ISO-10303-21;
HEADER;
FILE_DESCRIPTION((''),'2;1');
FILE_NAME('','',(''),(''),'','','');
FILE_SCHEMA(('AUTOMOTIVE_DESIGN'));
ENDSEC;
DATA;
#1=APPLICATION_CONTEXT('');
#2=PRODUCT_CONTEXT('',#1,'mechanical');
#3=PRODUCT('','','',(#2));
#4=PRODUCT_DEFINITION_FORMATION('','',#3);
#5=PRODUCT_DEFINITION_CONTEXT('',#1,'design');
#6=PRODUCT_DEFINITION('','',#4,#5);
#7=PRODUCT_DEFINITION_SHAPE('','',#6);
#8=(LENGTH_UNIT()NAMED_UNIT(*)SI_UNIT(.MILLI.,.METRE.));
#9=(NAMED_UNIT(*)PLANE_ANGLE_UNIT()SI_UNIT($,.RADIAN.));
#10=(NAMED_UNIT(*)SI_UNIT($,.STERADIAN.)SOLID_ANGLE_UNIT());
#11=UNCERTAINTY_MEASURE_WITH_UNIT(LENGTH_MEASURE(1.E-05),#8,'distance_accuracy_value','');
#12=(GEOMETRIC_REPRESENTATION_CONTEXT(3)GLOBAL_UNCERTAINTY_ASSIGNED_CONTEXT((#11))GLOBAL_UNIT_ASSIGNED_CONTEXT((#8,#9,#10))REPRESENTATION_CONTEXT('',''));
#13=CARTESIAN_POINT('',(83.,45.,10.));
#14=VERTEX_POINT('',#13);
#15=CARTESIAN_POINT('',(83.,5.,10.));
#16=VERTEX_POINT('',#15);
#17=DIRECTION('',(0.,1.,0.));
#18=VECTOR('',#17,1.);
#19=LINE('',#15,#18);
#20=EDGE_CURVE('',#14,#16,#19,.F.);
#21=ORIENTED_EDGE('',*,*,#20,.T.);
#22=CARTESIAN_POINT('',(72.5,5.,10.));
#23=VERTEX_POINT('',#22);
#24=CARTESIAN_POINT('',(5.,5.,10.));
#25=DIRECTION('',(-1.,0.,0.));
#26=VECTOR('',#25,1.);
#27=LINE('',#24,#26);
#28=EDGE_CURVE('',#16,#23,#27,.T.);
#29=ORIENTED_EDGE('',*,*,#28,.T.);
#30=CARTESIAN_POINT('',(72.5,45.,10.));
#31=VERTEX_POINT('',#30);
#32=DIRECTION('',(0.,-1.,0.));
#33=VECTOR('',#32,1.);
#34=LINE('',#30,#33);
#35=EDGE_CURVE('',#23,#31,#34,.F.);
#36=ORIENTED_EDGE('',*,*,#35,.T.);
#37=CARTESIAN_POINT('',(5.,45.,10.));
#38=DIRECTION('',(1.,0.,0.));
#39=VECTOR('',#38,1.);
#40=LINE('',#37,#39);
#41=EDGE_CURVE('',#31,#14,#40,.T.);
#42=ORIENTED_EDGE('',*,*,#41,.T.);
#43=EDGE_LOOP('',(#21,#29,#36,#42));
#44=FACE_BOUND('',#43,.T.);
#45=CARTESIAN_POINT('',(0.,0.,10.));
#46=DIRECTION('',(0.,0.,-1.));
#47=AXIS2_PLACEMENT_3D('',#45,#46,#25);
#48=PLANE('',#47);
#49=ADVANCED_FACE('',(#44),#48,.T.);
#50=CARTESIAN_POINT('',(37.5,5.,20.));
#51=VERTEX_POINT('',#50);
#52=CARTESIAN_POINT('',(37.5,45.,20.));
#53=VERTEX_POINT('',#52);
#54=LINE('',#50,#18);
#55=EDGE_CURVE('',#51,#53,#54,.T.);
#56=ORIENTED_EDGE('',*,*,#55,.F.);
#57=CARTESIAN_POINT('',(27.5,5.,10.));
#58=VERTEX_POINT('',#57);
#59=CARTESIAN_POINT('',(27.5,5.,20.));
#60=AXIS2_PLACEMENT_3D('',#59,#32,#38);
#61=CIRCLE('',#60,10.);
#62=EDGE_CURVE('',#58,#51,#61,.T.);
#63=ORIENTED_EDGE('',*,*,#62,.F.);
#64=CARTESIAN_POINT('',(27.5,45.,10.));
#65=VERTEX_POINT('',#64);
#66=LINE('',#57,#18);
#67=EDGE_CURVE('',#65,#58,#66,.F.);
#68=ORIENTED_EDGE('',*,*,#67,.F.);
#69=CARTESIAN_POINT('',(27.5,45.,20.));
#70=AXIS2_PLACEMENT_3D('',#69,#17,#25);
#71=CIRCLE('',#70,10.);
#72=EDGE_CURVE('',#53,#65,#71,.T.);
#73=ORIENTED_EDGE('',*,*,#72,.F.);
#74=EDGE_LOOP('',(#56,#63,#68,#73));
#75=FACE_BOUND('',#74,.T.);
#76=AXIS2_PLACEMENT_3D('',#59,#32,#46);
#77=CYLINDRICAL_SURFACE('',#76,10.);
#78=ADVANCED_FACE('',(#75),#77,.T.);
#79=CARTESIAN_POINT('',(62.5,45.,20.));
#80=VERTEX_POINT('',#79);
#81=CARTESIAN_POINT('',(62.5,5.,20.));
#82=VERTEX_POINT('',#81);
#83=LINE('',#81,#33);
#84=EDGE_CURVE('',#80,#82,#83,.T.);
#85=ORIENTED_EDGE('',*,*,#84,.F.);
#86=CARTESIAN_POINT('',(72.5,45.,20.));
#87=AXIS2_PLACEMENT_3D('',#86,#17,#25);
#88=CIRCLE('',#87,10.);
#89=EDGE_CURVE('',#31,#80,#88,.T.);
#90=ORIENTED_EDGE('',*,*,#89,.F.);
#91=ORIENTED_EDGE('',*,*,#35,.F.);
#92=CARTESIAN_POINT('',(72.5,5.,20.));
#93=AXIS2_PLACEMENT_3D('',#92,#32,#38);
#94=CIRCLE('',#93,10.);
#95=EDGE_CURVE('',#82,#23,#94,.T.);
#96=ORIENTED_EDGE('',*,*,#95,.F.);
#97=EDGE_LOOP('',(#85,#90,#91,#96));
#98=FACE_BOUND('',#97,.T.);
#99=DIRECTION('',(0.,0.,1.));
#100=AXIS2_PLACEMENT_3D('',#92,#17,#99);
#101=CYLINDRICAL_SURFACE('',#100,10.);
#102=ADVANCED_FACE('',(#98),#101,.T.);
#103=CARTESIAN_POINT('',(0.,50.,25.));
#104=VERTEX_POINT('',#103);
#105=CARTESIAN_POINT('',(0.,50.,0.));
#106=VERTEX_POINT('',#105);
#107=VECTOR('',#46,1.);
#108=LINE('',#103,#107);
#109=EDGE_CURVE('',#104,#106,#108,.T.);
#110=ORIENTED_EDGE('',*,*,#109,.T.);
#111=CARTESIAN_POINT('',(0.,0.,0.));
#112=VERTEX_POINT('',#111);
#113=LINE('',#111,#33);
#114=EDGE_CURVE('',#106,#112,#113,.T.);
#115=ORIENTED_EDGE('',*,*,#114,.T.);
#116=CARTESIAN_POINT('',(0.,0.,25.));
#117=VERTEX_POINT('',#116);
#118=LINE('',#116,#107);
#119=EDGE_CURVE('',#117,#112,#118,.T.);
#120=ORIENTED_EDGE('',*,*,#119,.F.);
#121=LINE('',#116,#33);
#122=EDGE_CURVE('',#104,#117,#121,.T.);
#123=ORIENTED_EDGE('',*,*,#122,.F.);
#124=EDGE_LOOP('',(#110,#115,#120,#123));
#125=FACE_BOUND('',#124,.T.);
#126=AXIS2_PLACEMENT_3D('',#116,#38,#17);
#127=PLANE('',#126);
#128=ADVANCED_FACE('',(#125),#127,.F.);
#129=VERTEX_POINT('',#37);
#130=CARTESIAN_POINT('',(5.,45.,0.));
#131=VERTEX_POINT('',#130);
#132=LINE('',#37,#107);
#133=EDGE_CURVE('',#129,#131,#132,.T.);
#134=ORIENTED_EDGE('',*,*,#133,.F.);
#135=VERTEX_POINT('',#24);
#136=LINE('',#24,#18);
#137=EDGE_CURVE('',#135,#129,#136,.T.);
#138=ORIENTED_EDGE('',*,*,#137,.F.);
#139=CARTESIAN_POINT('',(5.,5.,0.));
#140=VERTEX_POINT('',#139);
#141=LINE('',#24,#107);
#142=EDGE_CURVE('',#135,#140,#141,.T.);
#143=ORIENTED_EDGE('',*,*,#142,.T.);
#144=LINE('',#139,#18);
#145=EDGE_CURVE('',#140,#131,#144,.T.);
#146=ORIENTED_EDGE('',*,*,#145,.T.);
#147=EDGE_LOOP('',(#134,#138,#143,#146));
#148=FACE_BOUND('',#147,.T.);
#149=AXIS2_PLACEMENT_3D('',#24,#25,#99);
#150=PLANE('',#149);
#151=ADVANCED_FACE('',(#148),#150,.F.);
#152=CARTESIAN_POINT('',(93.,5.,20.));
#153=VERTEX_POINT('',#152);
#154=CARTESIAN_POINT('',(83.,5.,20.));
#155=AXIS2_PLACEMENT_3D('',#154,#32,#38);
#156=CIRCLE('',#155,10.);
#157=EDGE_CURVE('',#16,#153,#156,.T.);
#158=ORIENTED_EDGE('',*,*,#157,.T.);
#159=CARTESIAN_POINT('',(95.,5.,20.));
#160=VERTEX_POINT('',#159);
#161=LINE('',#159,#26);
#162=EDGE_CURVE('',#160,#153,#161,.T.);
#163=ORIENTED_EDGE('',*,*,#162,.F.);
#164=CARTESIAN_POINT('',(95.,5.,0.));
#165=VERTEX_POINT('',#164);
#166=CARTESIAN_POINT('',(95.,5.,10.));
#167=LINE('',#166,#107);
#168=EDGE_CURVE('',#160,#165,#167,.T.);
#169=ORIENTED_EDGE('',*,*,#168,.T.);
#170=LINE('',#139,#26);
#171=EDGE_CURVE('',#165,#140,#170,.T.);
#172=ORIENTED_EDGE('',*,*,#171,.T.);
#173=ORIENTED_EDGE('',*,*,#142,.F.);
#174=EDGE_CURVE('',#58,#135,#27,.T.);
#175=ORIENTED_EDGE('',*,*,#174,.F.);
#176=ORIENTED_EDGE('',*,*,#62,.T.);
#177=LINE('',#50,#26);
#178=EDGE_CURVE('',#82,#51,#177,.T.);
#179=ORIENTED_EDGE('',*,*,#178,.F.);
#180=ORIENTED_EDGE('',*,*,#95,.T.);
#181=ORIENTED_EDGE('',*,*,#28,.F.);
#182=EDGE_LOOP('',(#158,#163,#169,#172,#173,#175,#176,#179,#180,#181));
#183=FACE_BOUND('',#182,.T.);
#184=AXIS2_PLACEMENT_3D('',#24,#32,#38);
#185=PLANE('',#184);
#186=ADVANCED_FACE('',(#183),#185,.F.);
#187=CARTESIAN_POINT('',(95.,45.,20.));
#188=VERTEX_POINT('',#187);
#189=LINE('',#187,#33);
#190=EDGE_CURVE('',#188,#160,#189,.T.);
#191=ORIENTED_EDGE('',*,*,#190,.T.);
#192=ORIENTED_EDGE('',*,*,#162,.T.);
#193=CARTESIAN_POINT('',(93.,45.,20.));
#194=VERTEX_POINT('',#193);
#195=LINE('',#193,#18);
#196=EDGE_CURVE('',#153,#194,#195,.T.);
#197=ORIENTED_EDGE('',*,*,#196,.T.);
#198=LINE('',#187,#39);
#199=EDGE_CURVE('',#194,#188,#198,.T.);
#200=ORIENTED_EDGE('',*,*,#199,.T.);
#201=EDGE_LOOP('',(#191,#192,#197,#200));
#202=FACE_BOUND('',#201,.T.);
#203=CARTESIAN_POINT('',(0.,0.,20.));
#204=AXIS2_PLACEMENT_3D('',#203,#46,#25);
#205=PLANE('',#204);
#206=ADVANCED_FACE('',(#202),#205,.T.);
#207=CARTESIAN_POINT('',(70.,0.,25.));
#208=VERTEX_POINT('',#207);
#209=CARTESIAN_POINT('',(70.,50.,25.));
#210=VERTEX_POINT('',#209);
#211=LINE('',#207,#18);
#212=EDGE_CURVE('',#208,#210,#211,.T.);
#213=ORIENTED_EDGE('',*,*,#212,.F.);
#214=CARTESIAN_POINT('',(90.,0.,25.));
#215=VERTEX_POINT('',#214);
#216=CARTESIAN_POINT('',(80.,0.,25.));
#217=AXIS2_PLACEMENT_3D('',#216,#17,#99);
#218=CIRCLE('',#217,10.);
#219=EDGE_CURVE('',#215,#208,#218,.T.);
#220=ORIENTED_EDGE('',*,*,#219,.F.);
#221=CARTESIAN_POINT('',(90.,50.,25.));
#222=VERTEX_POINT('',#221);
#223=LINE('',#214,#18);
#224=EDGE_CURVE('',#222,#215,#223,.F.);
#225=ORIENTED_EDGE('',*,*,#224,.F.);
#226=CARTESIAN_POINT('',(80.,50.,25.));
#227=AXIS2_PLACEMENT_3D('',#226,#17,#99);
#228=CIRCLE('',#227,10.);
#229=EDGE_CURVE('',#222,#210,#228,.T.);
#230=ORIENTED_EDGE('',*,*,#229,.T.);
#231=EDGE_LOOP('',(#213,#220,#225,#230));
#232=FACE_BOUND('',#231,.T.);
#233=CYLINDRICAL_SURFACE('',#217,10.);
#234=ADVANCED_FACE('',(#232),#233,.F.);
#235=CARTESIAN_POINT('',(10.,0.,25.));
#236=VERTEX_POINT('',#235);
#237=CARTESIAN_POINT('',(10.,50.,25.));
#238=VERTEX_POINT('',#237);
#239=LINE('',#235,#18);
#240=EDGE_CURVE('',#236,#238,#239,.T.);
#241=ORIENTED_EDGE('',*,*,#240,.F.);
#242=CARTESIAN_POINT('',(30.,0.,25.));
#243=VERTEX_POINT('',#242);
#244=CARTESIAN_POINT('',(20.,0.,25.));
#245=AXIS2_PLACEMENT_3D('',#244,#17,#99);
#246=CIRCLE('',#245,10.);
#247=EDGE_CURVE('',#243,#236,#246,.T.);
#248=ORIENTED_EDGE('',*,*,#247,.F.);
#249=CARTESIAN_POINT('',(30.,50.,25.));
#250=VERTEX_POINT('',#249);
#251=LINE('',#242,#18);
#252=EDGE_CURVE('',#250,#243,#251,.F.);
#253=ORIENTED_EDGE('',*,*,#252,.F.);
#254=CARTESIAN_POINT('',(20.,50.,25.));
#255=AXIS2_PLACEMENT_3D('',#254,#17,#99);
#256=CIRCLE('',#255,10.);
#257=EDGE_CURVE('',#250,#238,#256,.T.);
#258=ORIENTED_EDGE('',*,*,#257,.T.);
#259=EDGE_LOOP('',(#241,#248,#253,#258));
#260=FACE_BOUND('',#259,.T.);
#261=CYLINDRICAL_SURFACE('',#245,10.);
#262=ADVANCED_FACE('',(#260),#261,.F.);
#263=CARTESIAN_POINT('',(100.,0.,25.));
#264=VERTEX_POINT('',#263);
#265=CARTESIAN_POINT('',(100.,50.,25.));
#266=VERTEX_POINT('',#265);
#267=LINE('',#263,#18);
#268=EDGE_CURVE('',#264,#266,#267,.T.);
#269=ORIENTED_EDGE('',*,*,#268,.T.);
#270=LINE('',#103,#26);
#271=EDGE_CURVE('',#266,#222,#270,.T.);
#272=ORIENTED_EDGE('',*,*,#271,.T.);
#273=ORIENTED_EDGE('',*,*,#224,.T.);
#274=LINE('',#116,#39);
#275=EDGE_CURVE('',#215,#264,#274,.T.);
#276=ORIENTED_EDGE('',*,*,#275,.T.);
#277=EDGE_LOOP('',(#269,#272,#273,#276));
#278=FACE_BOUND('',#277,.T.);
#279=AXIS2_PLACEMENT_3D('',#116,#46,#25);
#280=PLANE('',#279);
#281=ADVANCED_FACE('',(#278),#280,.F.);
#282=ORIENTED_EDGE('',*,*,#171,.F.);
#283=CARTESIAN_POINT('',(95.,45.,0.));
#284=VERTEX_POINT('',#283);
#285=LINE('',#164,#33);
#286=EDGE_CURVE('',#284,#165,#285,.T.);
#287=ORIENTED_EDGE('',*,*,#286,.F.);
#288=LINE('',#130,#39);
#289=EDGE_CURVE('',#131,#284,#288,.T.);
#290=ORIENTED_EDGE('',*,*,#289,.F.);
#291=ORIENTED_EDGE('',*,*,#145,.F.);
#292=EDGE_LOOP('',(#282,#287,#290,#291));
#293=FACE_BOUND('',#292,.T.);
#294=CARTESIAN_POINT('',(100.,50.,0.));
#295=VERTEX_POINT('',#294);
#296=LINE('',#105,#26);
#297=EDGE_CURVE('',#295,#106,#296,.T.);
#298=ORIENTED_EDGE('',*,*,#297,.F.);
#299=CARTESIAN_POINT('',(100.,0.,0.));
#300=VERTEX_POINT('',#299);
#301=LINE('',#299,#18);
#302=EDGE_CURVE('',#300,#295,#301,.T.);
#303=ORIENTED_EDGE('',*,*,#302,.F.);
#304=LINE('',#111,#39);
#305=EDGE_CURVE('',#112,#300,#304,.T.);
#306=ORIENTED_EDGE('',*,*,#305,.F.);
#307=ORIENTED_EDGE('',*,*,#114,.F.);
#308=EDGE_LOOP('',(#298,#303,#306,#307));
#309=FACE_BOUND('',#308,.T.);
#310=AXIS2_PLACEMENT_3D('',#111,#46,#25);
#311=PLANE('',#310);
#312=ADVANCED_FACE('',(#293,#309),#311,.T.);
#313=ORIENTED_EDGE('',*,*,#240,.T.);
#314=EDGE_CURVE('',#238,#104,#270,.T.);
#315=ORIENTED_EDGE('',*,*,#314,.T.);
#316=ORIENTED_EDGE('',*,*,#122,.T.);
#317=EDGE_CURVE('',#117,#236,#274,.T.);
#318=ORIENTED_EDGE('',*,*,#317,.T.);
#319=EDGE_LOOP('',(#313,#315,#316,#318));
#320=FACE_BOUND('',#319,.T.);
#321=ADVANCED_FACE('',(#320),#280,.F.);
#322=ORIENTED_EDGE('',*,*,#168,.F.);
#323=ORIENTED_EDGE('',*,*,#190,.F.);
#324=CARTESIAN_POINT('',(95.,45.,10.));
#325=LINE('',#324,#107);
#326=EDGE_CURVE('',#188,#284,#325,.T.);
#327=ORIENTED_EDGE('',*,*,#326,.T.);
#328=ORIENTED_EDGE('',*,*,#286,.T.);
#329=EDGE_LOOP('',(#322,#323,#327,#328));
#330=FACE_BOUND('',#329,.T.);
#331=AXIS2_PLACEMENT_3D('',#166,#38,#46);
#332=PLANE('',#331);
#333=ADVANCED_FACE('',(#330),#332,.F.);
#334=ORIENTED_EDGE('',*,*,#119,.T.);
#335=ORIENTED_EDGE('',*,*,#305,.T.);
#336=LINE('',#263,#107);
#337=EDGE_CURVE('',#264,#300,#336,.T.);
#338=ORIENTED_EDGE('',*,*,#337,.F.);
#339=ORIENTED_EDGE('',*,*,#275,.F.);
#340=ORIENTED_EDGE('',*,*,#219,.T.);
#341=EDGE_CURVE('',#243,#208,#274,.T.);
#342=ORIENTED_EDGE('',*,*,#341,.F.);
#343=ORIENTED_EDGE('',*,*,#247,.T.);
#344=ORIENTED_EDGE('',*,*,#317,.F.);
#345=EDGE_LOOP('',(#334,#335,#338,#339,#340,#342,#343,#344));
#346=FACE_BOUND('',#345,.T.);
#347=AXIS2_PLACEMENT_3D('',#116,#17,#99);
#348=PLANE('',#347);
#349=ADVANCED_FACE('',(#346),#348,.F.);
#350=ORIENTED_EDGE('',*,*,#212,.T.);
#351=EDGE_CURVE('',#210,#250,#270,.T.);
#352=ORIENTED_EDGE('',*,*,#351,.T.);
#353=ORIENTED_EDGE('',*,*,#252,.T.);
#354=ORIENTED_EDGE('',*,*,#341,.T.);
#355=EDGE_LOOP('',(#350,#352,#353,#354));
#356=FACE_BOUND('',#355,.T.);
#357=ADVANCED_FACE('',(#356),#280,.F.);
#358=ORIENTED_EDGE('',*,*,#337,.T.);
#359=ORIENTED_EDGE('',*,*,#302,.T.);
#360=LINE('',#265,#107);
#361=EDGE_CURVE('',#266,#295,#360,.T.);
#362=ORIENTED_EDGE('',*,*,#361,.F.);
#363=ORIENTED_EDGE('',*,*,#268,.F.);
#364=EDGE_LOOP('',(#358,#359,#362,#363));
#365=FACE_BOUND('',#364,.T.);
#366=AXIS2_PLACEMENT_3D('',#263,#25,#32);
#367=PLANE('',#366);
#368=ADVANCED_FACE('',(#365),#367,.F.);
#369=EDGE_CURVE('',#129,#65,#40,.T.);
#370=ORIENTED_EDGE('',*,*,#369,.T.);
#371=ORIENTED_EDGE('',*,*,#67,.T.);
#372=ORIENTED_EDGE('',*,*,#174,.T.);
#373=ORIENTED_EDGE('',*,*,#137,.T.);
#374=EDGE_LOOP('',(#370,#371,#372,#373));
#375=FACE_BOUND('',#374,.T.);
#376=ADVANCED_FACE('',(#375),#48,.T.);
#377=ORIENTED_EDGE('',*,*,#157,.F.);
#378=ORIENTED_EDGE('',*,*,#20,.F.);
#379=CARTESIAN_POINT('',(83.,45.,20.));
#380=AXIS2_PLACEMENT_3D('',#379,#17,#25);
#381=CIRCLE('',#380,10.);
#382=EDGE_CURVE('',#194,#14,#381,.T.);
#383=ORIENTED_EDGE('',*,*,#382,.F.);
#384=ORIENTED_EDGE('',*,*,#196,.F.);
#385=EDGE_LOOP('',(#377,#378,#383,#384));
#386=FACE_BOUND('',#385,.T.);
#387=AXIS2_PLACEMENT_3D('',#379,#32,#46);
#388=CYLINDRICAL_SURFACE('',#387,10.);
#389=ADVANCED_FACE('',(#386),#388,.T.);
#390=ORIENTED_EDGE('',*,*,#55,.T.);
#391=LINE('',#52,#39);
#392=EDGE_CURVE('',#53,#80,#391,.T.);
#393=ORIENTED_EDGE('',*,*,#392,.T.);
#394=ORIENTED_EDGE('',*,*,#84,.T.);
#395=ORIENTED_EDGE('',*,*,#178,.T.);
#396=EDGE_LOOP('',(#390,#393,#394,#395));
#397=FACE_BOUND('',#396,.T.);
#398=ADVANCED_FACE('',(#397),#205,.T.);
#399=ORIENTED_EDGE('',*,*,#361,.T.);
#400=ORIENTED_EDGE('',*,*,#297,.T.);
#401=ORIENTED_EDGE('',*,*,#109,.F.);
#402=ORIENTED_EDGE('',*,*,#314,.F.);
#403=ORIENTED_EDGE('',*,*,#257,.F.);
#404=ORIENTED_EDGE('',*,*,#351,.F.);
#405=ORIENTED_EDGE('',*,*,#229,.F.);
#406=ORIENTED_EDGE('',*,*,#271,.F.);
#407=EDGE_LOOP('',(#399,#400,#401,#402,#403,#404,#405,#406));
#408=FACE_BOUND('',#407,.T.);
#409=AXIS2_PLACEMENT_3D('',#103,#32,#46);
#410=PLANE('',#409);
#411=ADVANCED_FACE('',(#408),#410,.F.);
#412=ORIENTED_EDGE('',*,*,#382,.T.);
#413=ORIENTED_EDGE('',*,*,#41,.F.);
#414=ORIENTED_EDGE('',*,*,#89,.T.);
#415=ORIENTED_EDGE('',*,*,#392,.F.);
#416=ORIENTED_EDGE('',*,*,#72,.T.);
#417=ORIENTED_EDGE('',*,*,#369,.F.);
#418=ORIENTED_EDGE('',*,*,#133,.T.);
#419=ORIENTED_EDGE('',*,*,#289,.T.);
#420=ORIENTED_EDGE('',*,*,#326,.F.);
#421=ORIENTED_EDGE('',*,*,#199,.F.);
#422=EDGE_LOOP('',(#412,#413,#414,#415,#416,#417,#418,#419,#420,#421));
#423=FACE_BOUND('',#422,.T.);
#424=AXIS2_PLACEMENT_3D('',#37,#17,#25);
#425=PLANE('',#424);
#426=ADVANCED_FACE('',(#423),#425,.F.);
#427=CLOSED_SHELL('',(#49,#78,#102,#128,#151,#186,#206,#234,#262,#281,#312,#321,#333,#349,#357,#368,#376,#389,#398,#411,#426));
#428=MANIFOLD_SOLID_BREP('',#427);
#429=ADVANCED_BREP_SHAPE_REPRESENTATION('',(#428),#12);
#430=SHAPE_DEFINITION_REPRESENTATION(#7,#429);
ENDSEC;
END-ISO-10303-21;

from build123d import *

# Parameters (mm, degrees)
SKIZZE1_W                       = 100
SKIZZE1_H                       = 50
AUFSATZ_LINEAR_AUSTRAGEN2_DEPTH = 25
SKIZZE4_R                       = 10
SCHNITT_LINEAR_AUSTRAGEN3_DEPTH = 115.564392374
SKIZZE5_W                       = 90
SKIZZE5_H                       = 40
SCHNITT_LINEAR_AUSTRAGEN4_DEPTH = 10
SKIZZE7_W                       = 25
SKIZZE7_H                       = 40
SCHNITT_LINEAR_AUSTRAGEN5_DEPTH = 10
VERRUNDUNG1_R                   = 10
VERRUNDUNG2_R                   = 10
SKIZZE8_W                       = 2
SKIZZE8_H                       = 40
SCHNITT_LINEAR_AUSTRAGEN6_DEPTH = 10
VERRUNDUNG3_R                   = 10


with BuildPart() as part:
    # Skizze1 → Aufsatz-Linear austragen2 (new body)
    with BuildSketch(Plane.XY):
        with Locations((50, 25)):
            Rectangle(SKIZZE1_W, SKIZZE1_H)
    extrude(amount=AUFSATZ_LINEAR_AUSTRAGEN2_DEPTH)

    # Skizze4 → Schnitt-Linear austragen3 (cut, through all)
    with BuildSketch(Plane(origin=(0, 50, 0), x_dir=(1, 0, 0), z_dir=(0, 1, 0))):
        with Locations((20, -25)):
            Circle(SKIZZE4_R)
        with Locations((80, -25)):
            Circle(SKIZZE4_R)
    extrude(amount=-SCHNITT_LINEAR_AUSTRAGEN3_DEPTH, mode=Mode.SUBTRACT)

    # Skizze5 → Schnitt-Linear austragen4 (cut)
    with BuildSketch(Plane(origin=(0, 0, 0), x_dir=(-1, 0, 0), z_dir=(0, 0, -1))):
        with Locations((-50, 25)):
            Rectangle(SKIZZE5_W, SKIZZE5_H)
    extrude(amount=-SCHNITT_LINEAR_AUSTRAGEN4_DEPTH, mode=Mode.SUBTRACT)

    # Skizze7 → Schnitt-Linear austragen5 (cut)
    with BuildSketch(Plane(origin=(0, 0, 10), x_dir=(-1, 0, 0), z_dir=(0, 0, -1))):
        with Locations((-50, 25)):
            Rectangle(SKIZZE7_W, SKIZZE7_H)
    extrude(amount=-SCHNITT_LINEAR_AUSTRAGEN5_DEPTH, mode=Mode.SUBTRACT)

    # Verrundung1
    verrundung1_edges = [part.edges().sort_by_distance(p)[0] for p in [
        (37.5, 25, 10),
    ]]
    fillet(verrundung1_edges, radius=VERRUNDUNG1_R - 0.0001)  # a hair under: the kernel refuses the full size

    # Verrundung2
    verrundung2_edges = [part.edges().sort_by_distance(p)[0] for p in [
        (62.5, 25, 10),
    ]]
    fillet(verrundung2_edges, radius=VERRUNDUNG2_R - 0.0001)  # a hair under: the kernel refuses the full size

    # Skizze8 → Schnitt-Linear austragen6 (cut)
    with BuildSketch(Plane(origin=(0, 0, 10), x_dir=(-1, 0, 0), z_dir=(0, 0, -1))):
        with Locations((-94, 25)):
            Rectangle(SKIZZE8_W, SKIZZE8_H)
    extrude(amount=-SCHNITT_LINEAR_AUSTRAGEN6_DEPTH, mode=Mode.SUBTRACT)

    # Verrundung3
    verrundung3_edges = [part.edges().sort_by_distance(p)[0] for p in [
        (93, 25, 10),
    ]]
    fillet(verrundung3_edges, radius=VERRUNDUNG3_R - 0.0001)  # a hair under: the kernel refuses the full size


solid = part.part
